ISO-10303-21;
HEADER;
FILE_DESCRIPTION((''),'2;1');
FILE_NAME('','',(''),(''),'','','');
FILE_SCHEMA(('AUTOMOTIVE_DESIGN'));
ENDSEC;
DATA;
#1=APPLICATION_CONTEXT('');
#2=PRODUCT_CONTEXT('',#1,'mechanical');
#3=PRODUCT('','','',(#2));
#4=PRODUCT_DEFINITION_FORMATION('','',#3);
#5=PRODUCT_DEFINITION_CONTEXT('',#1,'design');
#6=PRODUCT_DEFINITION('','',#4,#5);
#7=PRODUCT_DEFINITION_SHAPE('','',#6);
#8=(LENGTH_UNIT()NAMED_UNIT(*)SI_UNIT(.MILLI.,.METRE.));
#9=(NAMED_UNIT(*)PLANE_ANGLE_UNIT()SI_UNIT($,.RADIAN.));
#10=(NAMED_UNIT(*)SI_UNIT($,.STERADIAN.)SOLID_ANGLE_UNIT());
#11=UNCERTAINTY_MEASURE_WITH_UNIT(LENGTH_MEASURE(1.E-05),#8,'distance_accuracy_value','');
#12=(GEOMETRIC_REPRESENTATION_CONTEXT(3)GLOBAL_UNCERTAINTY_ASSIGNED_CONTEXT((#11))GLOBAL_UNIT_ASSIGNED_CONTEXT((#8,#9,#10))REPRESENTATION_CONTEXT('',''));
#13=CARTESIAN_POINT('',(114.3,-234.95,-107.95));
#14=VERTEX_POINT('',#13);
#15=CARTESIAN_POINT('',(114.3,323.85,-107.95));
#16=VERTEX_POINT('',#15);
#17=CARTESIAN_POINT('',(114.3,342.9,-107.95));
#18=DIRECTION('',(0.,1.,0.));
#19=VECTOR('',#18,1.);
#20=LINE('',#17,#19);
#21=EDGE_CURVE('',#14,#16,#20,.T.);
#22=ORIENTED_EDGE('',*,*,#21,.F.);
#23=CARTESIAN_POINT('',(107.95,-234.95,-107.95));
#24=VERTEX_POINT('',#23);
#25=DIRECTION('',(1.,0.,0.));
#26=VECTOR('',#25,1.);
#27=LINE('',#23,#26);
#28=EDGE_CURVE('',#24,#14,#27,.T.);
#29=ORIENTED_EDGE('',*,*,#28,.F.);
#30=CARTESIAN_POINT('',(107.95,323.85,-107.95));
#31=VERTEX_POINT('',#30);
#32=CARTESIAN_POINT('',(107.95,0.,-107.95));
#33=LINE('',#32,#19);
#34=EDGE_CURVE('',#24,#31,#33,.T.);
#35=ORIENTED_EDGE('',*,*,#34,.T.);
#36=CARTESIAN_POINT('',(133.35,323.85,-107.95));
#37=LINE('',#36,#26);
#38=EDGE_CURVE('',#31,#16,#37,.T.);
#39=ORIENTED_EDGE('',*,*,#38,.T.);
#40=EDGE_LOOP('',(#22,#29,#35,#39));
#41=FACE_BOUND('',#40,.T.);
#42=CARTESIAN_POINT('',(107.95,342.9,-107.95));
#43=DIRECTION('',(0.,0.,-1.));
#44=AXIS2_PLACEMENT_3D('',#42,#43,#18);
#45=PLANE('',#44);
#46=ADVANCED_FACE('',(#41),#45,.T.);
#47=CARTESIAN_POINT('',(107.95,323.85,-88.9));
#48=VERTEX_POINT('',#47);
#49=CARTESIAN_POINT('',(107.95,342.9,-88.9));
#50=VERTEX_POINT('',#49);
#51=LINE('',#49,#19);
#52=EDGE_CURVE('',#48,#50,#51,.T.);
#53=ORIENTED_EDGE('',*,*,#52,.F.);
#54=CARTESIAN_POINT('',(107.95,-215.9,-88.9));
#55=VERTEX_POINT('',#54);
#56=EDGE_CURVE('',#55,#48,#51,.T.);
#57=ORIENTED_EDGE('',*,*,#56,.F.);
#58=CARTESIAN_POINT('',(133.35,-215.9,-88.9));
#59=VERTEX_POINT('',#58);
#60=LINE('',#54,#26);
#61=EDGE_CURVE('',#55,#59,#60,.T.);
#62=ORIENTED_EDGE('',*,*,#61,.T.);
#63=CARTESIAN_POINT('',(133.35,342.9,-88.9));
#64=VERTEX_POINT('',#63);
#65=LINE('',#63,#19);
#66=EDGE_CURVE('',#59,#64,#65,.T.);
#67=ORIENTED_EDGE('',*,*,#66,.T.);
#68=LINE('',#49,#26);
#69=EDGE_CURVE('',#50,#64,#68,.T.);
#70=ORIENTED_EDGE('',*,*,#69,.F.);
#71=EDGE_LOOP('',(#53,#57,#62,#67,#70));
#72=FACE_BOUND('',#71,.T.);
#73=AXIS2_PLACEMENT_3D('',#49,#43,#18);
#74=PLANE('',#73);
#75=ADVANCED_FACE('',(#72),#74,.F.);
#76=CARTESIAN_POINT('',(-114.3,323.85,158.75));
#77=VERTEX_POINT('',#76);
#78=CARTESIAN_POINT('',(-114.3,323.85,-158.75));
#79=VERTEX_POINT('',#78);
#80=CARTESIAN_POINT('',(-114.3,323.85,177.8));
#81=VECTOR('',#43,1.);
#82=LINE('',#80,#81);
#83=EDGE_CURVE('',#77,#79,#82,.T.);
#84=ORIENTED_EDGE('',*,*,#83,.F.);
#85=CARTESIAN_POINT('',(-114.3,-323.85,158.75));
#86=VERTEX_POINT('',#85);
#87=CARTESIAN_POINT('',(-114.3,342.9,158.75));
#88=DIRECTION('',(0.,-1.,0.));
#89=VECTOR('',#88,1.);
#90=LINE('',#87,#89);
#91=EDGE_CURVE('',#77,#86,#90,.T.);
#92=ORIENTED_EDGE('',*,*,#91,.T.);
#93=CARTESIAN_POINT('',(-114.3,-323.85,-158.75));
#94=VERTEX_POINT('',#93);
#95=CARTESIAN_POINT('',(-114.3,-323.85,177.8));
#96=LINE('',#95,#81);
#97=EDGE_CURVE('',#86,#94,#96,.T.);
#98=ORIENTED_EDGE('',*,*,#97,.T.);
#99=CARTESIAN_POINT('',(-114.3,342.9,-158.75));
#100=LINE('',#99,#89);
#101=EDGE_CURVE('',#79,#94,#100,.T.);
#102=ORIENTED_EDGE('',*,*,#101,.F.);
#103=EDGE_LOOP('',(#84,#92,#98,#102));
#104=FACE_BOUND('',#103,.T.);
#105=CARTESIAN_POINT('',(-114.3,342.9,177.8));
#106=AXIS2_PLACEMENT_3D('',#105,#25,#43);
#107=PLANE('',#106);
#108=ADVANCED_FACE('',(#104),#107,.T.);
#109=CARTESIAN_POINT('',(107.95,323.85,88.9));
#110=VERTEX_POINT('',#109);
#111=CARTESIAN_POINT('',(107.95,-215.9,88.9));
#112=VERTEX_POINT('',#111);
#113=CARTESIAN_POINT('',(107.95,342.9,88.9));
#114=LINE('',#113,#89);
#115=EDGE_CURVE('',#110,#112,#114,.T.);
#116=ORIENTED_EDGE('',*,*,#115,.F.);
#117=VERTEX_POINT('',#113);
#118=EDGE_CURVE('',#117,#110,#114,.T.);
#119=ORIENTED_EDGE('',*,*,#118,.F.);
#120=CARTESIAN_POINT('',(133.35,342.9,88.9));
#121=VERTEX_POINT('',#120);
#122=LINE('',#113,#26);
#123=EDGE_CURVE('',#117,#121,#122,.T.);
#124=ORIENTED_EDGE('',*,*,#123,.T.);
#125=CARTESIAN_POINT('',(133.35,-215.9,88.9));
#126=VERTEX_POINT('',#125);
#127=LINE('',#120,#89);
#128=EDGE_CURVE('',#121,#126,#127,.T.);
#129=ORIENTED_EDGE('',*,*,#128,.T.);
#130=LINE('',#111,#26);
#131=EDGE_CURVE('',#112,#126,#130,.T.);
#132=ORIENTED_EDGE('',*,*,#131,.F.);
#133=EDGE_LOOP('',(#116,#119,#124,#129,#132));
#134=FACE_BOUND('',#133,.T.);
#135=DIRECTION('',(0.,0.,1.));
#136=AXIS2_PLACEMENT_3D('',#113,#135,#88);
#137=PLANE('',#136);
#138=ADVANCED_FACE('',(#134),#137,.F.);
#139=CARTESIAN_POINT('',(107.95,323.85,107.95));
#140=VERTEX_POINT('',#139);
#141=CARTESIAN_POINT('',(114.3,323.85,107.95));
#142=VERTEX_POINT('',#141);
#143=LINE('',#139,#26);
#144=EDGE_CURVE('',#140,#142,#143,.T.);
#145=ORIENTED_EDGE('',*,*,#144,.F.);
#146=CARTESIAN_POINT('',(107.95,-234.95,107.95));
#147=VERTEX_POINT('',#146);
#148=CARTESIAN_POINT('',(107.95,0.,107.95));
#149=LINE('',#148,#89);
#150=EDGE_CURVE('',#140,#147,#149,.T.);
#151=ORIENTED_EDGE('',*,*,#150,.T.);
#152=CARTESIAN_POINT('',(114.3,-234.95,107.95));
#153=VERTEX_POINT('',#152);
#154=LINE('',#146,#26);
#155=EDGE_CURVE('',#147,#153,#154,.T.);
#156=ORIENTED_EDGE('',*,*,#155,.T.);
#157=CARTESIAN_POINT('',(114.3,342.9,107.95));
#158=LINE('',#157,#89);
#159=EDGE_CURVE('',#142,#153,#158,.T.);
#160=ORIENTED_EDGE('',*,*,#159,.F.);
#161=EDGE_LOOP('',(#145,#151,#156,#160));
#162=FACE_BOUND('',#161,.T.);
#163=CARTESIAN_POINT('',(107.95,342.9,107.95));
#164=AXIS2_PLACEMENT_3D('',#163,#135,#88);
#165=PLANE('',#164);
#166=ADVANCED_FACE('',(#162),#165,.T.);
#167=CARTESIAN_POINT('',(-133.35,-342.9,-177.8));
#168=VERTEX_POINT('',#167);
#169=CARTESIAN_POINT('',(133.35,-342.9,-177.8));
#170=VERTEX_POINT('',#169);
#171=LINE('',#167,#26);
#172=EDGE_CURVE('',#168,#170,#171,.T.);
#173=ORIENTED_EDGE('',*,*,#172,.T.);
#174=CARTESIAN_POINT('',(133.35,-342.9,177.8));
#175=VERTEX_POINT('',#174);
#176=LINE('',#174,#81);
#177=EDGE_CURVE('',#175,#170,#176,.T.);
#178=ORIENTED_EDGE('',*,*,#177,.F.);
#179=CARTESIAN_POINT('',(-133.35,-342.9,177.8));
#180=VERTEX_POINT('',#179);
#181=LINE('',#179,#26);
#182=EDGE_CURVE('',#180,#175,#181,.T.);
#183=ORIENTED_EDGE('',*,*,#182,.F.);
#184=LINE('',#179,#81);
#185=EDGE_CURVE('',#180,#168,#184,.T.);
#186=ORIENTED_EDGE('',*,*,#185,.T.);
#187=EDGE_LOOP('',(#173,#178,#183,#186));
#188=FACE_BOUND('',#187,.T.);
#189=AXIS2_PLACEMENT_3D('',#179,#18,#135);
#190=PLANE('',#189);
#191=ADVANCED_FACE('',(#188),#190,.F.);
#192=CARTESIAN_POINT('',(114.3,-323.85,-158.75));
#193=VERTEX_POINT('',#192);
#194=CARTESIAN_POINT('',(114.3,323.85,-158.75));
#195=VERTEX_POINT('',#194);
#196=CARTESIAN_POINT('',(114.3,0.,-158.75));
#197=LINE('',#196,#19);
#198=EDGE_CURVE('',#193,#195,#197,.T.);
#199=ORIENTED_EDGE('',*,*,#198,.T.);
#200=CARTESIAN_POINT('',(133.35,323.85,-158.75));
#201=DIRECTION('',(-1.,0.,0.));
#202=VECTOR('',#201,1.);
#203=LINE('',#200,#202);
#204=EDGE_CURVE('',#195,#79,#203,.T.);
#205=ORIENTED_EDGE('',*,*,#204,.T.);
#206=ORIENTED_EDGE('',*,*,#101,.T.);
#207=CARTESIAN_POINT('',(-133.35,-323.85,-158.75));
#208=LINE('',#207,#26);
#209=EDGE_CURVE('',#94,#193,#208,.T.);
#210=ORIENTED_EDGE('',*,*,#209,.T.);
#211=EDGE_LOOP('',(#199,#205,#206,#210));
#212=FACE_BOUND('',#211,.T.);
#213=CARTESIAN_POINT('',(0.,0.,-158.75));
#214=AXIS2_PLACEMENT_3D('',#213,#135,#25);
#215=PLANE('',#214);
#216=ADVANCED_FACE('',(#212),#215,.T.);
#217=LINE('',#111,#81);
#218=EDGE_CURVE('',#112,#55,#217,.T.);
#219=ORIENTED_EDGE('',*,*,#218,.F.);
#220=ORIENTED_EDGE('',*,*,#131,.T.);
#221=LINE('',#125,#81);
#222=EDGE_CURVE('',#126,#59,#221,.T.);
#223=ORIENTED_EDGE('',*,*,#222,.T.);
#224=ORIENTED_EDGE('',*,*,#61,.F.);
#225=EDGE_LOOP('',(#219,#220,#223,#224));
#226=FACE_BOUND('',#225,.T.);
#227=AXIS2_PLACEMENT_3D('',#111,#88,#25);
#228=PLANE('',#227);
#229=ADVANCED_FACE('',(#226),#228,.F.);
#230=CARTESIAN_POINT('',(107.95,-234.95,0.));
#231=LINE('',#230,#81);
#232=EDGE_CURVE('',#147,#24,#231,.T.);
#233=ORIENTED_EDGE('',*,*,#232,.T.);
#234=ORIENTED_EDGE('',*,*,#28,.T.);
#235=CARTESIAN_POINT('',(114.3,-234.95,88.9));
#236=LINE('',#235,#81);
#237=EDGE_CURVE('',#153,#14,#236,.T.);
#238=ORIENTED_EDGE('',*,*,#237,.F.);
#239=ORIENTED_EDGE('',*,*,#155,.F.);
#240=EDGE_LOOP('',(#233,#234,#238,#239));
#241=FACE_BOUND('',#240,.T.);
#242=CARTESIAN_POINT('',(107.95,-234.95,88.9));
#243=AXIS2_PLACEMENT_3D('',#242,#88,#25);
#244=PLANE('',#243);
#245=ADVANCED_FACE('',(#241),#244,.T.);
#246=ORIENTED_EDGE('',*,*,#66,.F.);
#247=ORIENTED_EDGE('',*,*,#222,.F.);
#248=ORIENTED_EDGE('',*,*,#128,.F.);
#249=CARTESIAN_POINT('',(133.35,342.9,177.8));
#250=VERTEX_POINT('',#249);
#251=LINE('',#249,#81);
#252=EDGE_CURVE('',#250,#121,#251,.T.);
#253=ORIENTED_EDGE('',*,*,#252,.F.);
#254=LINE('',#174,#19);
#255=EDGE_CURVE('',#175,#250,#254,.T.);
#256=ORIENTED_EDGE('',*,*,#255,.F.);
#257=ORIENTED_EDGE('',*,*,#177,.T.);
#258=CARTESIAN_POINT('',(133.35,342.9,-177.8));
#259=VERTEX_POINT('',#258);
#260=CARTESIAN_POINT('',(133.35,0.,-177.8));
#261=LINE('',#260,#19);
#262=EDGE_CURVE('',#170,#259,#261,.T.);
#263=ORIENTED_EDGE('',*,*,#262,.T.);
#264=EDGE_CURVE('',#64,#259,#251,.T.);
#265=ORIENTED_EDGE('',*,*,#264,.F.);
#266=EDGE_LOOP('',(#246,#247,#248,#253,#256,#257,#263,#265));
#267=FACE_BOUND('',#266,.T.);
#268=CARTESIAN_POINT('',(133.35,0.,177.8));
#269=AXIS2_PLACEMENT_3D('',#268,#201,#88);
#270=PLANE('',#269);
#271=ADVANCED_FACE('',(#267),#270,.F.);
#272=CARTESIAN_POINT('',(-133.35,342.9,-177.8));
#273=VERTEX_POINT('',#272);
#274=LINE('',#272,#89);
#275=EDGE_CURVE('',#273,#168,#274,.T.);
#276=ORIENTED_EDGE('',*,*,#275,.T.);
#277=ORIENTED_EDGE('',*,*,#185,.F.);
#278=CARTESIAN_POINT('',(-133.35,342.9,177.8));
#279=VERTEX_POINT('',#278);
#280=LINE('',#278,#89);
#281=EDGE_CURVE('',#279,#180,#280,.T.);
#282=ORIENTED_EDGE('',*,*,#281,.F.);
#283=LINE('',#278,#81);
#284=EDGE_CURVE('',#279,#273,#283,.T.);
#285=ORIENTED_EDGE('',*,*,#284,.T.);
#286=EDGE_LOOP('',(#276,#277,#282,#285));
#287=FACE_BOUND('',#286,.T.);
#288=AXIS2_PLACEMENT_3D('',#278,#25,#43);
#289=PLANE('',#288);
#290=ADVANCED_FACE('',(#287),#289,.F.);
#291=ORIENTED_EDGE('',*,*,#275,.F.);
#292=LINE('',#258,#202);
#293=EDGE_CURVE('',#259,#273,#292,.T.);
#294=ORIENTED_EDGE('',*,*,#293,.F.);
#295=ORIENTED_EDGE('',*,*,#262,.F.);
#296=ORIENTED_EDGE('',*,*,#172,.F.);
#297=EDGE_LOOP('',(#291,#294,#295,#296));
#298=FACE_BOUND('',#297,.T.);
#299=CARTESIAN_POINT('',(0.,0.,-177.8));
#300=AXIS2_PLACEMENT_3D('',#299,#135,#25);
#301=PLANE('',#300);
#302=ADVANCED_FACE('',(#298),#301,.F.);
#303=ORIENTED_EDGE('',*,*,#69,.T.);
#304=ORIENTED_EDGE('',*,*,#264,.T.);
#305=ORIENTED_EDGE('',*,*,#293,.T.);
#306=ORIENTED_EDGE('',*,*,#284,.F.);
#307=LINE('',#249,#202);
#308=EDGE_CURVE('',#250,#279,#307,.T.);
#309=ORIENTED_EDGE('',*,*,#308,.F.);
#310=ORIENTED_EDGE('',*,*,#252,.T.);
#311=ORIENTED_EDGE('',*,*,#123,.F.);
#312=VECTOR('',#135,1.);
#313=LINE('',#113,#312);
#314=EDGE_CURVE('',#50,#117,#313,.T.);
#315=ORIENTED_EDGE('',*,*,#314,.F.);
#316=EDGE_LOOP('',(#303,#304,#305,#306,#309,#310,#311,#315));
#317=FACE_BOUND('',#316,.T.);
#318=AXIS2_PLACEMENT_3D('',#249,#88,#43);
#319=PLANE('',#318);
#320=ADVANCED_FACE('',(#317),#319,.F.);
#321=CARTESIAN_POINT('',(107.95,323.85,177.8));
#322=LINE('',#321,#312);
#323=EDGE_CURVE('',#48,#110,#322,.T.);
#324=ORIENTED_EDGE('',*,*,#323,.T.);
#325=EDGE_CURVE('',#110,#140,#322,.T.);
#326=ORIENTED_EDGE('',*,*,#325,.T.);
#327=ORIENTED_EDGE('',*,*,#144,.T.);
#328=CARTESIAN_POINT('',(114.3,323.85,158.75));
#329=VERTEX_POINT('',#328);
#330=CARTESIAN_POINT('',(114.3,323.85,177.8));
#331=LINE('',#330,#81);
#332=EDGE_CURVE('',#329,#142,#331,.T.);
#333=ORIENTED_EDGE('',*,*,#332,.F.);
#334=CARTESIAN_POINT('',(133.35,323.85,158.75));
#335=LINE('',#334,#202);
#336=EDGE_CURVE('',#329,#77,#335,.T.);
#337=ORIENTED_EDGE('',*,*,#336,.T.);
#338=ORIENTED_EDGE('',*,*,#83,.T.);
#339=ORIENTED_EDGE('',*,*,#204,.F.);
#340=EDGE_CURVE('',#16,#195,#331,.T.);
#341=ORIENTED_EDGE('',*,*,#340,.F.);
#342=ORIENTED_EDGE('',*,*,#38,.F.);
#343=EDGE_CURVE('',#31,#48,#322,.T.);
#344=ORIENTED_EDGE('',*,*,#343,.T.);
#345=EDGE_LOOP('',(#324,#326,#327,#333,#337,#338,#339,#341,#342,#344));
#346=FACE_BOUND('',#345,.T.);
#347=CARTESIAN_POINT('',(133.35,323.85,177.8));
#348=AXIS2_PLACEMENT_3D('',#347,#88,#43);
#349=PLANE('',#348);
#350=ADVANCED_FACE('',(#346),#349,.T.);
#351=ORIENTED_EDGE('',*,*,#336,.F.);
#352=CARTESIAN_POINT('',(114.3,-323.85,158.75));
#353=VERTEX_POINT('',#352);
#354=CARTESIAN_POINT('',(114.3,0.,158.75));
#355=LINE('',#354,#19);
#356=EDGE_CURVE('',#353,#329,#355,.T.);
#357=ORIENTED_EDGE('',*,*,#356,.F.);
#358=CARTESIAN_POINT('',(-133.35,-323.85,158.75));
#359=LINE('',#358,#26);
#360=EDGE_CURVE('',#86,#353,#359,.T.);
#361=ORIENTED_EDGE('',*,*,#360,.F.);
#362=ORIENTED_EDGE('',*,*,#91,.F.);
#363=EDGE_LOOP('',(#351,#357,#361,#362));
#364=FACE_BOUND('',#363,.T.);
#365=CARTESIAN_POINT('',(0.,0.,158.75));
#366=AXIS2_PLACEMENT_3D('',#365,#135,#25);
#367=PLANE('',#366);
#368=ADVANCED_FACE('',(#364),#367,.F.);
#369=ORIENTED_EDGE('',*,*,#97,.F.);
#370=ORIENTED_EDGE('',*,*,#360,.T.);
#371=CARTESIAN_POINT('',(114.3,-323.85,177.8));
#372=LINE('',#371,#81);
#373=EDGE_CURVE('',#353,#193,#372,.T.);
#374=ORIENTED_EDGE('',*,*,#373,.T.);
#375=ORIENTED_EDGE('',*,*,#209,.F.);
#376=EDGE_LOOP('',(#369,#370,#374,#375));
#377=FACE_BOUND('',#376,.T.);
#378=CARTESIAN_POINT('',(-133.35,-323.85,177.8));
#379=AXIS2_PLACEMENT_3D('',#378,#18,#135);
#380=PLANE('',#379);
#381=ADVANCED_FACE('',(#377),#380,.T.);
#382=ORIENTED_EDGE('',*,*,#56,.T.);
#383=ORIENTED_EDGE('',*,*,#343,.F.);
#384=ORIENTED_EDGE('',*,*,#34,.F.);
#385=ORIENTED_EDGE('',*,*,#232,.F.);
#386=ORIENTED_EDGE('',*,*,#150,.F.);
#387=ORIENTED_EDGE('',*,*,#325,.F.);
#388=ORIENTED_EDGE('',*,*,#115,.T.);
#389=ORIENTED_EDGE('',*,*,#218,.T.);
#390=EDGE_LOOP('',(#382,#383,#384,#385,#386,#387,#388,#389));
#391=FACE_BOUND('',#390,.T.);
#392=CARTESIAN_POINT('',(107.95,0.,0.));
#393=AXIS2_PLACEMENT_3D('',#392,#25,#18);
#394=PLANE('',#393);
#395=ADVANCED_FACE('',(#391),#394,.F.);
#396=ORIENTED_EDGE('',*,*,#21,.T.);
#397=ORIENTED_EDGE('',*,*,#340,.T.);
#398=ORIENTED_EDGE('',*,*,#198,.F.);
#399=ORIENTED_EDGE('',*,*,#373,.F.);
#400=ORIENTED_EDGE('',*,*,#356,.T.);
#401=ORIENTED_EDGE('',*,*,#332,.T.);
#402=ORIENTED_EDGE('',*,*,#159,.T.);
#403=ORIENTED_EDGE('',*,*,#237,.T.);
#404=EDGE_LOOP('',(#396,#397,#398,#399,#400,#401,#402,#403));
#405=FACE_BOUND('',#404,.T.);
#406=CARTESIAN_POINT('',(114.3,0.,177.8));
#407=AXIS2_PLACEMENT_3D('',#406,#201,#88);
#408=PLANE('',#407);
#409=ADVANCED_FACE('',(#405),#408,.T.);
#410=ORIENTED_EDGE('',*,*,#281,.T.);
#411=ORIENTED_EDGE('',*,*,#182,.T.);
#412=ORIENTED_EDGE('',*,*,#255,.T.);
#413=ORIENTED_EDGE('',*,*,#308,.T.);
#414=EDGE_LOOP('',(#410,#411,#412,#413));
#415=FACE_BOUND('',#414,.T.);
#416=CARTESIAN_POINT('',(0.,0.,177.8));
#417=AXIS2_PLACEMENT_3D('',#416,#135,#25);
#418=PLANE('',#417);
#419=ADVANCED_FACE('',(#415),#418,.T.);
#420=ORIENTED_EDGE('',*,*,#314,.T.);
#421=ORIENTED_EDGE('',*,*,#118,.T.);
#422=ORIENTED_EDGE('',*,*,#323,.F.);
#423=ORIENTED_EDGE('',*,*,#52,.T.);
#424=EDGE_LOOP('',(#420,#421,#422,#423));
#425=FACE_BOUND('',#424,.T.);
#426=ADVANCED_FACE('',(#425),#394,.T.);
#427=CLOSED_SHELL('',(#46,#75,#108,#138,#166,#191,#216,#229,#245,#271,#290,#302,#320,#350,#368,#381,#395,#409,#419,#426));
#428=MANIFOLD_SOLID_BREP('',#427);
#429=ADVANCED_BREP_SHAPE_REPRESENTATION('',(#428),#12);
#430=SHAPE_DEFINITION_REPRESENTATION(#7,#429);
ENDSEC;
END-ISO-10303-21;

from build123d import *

# Parameters (mm, degrees)
SALIENTE_EXTRUIR1_DEPTH = 177.8
CROQUIS2_W              = 177.8
CROQUIS2_H              = 558.8
CORTAR_EXTRUIR1_DEPTH   = 25.4
VACIADO1_START          = -323.85
VACIADO1_DEPTH          = 647.7
VACIADO1_2_OUTLINE_W    = 6.35
VACIADO1_2_OUTLINE_H    = 215.9
VACIADO1_2_DEPTH        = 88.9


# Read off the part's stored shape, not the designer's step: Vaciado1
with BuildPart() as part:
    # Croquis1 → Saliente-Extruir1 (new, symmetric)
    with BuildSketch(Plane.XY):
        Polygon((-133.35, 342.9), (-133.35, -342.9), (133.35, -342.9), (133.35, 0), (133.35, 342.9), align=None)
    extrude(amount=SALIENTE_EXTRUIR1_DEPTH, both=True)

    # Croquis2 → Cortar-Extruir1 (cut)
    with BuildSketch(Plane(origin=(133.35, 0, 0), x_dir=(0, 0, -1), z_dir=(1, 0, 0))):
        with Locations((0, 63.5)):
            Rectangle(CROQUIS2_W, CROQUIS2_H)
    extrude(amount=-CORTAR_EXTRUIR1_DEPTH, mode=Mode.SUBTRACT)

    # Vaciado1 outline → Vaciado1 (cut)
    with BuildSketch(Plane(origin=(0, 0, 0), x_dir=(1, 0, 0), z_dir=(0, 1, 0)).offset(VACIADO1_START)):
        Polygon((-114.3, 158.75), (-114.3, -158.75), (114.3, -158.75), (114.3, -107.95), (107.95, -107.95), (107.95, 107.95), (114.3, 107.95), (114.3, 158.75), align=None)
    extrude(amount=VACIADO1_DEPTH, mode=Mode.SUBTRACT)

    # Vaciado1 2 outline → Vaciado1 2 (cut)
    with BuildSketch(Plane(origin=(0, 0, 0), x_dir=(1, 0, 0), z_dir=(0, 1, 0)).offset(VACIADO1_START)):
        with Locations((111.125, 0)):
            Rectangle(VACIADO1_2_OUTLINE_W, VACIADO1_2_OUTLINE_H)
    extrude(amount=VACIADO1_2_DEPTH, mode=Mode.SUBTRACT)


solid = part.part
